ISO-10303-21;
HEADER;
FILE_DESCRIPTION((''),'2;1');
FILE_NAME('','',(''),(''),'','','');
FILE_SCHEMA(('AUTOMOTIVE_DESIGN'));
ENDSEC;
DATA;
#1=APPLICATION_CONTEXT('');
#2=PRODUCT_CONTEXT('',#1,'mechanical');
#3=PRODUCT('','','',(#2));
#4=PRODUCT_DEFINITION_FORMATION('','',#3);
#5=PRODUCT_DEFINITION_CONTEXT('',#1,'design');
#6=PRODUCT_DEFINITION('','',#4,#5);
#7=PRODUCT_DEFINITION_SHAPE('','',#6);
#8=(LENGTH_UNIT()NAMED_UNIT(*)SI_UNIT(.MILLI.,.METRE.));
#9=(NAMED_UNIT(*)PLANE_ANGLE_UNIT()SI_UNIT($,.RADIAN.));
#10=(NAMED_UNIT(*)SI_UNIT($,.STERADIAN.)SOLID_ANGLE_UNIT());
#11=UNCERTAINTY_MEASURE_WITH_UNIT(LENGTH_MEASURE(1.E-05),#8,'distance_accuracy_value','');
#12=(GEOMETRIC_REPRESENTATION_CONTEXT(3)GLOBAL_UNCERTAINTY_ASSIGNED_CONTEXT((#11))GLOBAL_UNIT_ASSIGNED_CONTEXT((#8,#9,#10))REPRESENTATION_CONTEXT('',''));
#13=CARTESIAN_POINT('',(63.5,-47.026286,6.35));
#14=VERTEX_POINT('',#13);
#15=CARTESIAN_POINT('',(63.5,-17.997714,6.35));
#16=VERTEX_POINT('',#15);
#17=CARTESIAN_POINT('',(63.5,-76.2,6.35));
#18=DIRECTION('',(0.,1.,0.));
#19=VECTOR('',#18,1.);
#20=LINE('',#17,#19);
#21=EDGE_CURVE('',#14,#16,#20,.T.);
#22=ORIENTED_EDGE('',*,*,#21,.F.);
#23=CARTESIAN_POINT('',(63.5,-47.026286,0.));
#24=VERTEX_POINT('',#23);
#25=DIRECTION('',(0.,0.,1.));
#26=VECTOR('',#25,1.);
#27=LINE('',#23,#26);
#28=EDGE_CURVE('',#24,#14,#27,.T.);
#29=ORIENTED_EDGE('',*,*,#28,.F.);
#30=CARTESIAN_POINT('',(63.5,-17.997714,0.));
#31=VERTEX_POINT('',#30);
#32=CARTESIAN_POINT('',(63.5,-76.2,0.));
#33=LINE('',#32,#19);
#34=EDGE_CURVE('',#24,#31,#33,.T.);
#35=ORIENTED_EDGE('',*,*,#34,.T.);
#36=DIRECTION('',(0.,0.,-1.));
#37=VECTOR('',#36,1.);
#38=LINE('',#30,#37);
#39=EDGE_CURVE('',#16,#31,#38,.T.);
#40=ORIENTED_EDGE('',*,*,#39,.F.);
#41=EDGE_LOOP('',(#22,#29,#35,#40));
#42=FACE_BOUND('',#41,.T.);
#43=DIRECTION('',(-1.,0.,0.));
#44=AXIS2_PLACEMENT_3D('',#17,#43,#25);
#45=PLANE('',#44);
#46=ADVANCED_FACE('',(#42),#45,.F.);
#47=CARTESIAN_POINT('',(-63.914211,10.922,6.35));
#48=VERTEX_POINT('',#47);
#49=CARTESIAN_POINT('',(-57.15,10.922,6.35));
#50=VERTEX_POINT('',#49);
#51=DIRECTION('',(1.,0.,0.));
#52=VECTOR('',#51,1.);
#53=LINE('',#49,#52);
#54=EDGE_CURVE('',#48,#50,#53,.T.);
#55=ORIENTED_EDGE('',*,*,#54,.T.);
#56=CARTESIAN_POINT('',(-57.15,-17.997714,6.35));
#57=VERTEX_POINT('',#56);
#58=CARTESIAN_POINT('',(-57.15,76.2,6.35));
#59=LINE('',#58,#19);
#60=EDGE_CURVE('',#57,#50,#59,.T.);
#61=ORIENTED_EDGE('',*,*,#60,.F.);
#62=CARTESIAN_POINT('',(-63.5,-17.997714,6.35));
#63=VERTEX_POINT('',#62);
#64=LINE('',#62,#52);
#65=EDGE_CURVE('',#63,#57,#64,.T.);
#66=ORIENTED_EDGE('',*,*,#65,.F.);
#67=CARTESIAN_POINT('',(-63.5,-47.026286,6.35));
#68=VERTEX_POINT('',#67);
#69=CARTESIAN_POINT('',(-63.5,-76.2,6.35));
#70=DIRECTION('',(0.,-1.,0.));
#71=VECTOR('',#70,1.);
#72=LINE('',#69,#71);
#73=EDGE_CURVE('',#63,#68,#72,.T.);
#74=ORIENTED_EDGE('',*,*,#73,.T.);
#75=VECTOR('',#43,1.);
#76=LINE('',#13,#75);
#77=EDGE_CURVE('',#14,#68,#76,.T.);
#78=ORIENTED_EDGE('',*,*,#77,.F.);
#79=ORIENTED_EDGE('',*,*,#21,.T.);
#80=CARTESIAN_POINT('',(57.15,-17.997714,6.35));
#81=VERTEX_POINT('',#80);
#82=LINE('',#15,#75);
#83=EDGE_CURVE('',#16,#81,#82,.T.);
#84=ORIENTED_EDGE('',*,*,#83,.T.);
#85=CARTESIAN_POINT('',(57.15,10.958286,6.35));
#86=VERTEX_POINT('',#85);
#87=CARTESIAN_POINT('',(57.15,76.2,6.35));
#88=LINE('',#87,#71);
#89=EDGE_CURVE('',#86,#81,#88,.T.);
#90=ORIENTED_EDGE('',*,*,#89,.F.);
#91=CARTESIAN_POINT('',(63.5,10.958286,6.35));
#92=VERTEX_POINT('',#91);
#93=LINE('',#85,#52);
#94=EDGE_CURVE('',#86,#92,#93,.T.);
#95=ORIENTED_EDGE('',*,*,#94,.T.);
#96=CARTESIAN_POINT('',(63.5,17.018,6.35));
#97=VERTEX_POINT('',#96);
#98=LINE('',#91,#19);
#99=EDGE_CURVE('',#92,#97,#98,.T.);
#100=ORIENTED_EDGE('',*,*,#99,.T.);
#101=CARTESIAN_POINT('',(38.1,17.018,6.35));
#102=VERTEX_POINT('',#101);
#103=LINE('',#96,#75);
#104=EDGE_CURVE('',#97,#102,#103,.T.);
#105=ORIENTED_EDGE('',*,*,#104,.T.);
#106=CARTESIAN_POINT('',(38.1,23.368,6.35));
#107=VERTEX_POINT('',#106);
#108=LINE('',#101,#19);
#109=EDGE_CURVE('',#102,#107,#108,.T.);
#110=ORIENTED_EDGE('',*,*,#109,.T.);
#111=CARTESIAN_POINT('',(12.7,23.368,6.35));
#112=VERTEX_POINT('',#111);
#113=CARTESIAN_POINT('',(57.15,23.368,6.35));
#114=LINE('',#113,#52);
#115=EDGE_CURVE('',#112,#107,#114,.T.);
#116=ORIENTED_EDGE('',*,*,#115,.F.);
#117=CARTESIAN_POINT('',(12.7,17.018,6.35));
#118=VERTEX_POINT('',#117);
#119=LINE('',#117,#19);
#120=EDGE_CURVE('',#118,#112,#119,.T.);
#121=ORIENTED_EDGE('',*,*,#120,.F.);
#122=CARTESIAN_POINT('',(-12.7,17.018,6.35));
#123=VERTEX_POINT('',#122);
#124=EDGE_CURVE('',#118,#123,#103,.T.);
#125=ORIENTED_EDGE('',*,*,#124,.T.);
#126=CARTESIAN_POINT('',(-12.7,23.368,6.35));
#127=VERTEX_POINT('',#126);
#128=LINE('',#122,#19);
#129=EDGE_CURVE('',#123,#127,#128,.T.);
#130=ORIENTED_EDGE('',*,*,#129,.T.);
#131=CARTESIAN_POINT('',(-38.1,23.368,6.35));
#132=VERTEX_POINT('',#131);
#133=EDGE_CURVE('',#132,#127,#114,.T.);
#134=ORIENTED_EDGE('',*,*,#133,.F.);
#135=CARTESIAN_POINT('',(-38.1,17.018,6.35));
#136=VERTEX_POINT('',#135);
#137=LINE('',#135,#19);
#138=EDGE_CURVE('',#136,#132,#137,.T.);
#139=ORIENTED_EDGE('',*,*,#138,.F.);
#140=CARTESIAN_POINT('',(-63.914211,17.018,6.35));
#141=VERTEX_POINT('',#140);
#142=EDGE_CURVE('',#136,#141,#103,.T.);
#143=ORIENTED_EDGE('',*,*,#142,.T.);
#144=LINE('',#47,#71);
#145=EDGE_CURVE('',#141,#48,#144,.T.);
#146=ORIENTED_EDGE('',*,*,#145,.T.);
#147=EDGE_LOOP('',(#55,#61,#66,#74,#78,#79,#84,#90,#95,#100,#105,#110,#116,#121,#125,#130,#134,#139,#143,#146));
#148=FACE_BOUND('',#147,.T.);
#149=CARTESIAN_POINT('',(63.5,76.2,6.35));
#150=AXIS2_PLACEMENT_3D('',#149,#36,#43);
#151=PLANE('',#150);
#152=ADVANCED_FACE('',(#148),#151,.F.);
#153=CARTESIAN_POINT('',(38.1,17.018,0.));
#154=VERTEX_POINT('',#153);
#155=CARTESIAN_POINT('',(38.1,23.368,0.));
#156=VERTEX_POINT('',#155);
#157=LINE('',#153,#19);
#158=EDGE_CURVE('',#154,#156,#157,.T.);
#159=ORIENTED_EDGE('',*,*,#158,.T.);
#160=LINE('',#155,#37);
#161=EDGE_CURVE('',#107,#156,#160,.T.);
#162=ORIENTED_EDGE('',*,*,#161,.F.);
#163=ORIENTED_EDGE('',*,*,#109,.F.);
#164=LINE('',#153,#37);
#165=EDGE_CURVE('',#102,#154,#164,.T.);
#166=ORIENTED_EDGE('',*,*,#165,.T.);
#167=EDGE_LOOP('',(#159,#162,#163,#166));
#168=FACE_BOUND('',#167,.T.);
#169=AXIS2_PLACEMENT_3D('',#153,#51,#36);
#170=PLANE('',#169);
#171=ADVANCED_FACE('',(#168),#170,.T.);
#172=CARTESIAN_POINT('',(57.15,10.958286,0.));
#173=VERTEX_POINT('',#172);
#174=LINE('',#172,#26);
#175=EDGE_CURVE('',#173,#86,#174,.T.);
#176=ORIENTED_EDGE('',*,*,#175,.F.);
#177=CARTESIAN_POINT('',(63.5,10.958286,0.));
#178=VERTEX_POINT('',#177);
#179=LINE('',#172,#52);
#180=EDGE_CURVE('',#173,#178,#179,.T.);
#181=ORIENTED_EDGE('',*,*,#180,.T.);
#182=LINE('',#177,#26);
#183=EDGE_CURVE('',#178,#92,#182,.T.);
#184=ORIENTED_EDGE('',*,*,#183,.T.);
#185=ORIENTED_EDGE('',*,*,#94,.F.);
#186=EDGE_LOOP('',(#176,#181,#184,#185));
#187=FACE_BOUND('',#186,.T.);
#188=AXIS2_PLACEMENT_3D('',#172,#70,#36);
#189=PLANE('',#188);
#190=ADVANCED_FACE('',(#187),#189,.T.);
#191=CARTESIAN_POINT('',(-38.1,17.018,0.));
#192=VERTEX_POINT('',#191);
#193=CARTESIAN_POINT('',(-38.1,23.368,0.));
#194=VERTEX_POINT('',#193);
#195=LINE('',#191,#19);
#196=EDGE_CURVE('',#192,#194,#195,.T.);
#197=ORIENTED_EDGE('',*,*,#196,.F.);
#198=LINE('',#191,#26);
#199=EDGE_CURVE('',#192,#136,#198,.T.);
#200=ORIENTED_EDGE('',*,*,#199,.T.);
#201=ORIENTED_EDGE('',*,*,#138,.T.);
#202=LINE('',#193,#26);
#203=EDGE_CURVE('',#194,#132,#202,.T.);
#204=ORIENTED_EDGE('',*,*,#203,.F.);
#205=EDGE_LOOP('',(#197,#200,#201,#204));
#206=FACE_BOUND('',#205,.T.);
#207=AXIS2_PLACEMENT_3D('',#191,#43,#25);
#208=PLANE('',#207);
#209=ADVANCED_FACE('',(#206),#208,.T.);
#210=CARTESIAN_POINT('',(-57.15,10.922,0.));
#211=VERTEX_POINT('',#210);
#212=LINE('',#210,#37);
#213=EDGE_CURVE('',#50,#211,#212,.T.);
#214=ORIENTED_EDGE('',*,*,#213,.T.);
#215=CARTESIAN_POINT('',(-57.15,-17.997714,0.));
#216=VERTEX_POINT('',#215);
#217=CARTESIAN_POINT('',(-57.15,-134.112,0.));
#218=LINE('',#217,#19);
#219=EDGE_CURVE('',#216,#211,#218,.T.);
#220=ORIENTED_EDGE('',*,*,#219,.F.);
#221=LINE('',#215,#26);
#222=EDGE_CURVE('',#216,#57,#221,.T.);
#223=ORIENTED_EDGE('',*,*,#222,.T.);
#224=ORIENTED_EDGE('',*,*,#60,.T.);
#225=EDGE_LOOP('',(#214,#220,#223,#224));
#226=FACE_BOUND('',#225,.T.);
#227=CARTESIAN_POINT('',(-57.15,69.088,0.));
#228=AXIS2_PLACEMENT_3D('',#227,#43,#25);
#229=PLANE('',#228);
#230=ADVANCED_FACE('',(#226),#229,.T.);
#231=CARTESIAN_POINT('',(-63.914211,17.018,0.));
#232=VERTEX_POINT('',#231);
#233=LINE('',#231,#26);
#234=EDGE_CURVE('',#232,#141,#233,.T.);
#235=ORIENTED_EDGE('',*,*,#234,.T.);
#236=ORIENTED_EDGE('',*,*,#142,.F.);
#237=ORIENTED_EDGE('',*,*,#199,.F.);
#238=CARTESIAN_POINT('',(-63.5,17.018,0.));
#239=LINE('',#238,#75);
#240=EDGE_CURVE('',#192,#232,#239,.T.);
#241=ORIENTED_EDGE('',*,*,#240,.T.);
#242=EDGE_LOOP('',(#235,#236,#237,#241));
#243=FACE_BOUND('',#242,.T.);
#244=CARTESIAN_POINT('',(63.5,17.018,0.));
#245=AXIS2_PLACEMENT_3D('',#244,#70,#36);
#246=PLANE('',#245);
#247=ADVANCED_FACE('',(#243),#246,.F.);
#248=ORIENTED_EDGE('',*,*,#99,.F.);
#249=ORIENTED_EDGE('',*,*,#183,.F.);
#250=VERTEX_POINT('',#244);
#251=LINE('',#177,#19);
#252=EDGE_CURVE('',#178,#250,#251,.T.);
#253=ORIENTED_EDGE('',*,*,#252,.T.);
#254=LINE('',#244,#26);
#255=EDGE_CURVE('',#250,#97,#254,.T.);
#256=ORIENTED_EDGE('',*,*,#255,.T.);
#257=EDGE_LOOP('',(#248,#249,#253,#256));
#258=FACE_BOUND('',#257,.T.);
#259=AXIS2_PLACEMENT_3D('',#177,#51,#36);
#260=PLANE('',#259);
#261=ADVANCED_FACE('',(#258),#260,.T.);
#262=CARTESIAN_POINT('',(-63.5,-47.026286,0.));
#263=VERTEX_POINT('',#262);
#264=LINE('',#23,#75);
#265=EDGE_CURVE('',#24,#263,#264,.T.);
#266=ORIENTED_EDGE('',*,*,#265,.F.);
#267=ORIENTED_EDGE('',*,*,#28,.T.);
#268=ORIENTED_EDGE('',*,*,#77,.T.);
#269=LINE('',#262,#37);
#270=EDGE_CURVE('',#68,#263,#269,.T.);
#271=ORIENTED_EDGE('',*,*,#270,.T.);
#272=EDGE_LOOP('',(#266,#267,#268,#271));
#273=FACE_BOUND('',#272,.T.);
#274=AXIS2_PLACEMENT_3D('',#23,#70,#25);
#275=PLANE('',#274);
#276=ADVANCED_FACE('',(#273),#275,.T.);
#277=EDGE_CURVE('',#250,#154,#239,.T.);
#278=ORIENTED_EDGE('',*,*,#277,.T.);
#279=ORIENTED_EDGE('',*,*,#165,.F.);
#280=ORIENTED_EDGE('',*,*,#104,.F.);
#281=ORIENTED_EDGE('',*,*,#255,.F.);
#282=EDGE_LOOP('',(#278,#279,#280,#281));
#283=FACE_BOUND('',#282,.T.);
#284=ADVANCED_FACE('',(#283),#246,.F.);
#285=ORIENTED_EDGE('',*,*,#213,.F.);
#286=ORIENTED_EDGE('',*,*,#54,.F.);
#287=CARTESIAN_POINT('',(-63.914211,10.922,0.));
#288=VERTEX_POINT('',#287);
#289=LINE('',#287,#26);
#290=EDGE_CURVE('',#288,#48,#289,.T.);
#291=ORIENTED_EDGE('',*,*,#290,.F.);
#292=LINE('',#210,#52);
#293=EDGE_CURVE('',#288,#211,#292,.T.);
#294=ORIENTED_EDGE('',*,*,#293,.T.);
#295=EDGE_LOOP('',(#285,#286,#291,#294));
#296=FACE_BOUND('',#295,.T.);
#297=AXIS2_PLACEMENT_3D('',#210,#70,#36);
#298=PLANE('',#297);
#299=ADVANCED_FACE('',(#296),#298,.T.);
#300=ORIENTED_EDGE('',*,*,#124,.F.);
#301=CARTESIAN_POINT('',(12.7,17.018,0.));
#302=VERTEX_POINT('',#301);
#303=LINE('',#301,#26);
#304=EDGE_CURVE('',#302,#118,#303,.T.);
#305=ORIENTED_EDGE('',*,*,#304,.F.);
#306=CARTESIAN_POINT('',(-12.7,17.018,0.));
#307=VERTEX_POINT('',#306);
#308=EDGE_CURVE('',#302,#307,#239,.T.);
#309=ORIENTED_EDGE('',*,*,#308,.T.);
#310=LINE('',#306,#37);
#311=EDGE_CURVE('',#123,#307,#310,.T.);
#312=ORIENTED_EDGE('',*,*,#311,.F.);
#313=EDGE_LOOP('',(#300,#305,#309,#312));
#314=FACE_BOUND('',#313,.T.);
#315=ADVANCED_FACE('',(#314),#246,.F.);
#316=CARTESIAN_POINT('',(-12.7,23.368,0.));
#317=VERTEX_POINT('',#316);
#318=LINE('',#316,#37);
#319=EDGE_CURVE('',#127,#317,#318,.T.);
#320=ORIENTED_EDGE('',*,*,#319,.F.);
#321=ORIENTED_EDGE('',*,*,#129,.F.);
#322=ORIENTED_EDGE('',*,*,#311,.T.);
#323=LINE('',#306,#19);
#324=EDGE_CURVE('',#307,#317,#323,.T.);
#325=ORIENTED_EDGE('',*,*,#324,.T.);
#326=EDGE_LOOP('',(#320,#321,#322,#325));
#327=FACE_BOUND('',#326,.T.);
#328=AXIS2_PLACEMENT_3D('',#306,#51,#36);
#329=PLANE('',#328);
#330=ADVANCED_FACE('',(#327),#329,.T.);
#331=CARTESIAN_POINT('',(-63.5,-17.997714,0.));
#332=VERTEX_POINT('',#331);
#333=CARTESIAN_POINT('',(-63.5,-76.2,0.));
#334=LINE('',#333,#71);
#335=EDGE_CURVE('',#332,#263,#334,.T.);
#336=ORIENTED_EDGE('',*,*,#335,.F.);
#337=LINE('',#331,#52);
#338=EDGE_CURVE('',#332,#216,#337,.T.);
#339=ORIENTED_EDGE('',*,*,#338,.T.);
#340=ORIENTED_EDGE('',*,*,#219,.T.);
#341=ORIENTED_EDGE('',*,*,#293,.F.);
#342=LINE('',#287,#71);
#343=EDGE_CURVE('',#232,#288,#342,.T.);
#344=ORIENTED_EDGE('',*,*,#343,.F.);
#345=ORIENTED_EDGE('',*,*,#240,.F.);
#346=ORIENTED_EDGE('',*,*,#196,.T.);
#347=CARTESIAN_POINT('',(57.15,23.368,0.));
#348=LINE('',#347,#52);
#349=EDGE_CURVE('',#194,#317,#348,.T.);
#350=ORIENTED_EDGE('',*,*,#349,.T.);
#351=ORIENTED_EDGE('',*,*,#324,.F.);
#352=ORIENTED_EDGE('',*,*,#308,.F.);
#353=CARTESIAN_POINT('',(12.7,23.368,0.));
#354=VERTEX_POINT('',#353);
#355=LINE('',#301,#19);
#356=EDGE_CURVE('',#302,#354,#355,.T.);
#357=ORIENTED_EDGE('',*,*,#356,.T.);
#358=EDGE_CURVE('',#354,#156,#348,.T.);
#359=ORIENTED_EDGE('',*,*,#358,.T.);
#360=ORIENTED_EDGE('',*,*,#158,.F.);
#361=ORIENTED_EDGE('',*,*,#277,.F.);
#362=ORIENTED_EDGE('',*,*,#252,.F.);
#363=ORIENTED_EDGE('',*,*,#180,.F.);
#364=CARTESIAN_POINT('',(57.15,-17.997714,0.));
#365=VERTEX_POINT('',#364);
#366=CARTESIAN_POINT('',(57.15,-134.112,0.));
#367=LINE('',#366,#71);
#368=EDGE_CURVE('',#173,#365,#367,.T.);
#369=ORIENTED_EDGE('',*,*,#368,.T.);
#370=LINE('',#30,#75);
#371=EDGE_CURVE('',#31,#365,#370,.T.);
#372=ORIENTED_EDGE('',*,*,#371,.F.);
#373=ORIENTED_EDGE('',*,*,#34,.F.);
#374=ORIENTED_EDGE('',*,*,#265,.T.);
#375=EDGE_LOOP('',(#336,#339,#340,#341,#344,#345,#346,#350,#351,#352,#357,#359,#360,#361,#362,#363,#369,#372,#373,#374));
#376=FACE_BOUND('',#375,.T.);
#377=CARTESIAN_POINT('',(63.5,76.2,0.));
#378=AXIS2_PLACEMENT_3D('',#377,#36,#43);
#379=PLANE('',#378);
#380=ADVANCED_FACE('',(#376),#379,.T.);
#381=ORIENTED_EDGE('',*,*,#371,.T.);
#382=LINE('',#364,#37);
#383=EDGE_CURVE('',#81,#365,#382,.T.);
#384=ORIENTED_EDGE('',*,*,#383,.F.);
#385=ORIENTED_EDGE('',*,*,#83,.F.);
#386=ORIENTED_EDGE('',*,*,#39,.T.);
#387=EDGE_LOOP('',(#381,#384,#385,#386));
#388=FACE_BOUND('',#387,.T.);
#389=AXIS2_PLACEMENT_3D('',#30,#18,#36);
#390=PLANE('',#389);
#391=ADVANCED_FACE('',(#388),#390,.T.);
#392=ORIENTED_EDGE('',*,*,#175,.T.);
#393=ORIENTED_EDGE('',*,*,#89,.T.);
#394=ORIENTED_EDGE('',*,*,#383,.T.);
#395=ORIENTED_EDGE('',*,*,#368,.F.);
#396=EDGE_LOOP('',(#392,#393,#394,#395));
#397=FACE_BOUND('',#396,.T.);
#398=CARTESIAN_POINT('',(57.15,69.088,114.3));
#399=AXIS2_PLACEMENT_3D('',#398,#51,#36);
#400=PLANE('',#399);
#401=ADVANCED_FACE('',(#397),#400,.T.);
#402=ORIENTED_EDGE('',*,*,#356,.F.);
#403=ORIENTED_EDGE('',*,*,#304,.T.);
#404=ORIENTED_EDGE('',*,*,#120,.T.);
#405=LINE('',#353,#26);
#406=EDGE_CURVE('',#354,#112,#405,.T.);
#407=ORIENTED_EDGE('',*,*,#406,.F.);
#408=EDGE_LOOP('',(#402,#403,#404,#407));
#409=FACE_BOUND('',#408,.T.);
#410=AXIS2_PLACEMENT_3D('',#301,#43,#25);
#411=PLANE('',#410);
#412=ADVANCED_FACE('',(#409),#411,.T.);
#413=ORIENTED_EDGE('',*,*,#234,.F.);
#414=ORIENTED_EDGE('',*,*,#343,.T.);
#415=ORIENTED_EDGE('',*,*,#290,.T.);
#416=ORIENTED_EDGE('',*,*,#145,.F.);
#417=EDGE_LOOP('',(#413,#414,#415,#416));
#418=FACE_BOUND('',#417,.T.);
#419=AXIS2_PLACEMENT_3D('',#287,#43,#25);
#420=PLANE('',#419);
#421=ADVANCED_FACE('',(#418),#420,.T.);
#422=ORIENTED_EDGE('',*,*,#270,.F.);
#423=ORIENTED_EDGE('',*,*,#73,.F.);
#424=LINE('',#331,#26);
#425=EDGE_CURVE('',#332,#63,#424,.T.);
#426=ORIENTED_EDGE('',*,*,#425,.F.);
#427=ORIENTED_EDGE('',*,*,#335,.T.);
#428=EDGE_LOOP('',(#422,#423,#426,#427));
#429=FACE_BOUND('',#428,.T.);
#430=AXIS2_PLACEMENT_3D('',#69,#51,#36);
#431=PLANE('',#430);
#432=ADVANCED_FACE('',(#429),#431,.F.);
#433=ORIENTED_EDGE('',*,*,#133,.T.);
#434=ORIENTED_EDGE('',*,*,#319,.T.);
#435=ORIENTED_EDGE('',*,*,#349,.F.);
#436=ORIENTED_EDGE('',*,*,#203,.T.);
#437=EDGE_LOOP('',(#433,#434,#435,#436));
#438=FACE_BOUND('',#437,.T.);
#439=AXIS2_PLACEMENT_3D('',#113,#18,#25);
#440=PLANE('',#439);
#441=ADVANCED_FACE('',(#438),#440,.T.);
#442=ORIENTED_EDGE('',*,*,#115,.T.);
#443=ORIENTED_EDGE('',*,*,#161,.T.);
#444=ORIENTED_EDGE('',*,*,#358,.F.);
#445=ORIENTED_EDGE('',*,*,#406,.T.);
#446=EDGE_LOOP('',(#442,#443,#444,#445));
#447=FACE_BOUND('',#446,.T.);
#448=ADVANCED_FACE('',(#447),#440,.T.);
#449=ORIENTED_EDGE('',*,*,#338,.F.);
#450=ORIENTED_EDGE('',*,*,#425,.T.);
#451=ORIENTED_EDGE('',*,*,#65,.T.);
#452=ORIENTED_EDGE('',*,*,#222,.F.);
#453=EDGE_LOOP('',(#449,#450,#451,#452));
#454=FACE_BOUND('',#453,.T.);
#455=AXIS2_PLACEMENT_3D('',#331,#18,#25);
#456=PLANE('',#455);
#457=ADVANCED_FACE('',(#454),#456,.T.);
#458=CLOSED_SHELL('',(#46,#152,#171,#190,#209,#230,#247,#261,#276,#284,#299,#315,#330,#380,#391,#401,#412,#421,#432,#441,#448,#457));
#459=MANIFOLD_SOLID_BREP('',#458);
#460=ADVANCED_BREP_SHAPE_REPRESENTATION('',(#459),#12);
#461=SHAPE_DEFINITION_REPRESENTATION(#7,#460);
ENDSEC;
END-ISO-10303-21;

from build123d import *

# Parameters (mm, degrees)
SKETCH2_W             = 127
SKETCH2_H             = 152.4
BOSS_EXTRUDE2_DEPTH   = 6.35
SKETCH3_W             = 127
SKETCH3_H             = 65.278
CUT_EXTRUDE1_DEPTH    = 100.3932216
CAVITY1_START         = -63.5
CAVITY1_OUTLINE_W     = 28.919714286
CAVITY1_OUTLINE_H     = 6.35
CAVITY1_OUTLINE_W_2   = 29.028571429
CAVITY1_DEPTH         = 6.35
CAVITY1_START_2       = 57.15
CAVITY1_2_OUTLINE_W   = 28.919714286
CAVITY1_2_OUTLINE_H   = 6.35
CAVITY1_2_OUTLINE_W_2 = 29.028571429
CAVITY1_2_DEPTH       = 6.35
CUT_EXTRUDE2_DEPTH    = 100.3932216
BOSS_EXTRUDE3_DEPTH   = 6.35
CAVITY2_START         = 17.018
CAVITY2_OUTLINE_W     = 20.9
CAVITY2_OUTLINE_H     = 9
CAVITY2_OUTLINE_W_2   = 25.4
CAVITY2_OUTLINE_W_3   = 19.05
CAVITY2_DEPTH         = 6.35
SKETCH6_W             = 6.35
SKETCH6_H             = 6.059714286
BOSS_EXTRUDE4_DEPTH   = 6.35
SKETCH7_W             = 114.3
SKETCH7_H             = 29.173714286
CUT_EXTRUDE3_DEPTH    = 100.658360693


# Read off the part's stored shape, not the designer's step: Cavity1, Cavity2
with BuildPart() as part:
    # Sketch2 → Boss-Extrude2 (new body)
    with BuildSketch(Plane.XY):
        Rectangle(SKETCH2_W, SKETCH2_H)
    extrude(amount=BOSS_EXTRUDE2_DEPTH)

    # Sketch3 → Cut-Extrude1 (cut, through all)
    with BuildSketch(Plane.XY.offset(6.35)):
        with Locations((0, 43.561)):
            Rectangle(SKETCH3_W, SKETCH3_H)
    extrude(amount=-CUT_EXTRUDE1_DEPTH, mode=Mode.SUBTRACT)

    # Cavity1 outline → Cavity1 (cut)
    with BuildSketch(Plane.YZ.offset(CAVITY1_START)):
        with Locations((-3.537857143, 3.175)):
            Rectangle(CAVITY1_OUTLINE_W, CAVITY1_OUTLINE_H)
        with Locations((-61.540571429, 3.175)):
            Rectangle(CAVITY1_OUTLINE_W_2, CAVITY1_OUTLINE_H)
    extrude(amount=CAVITY1_DEPTH, mode=Mode.SUBTRACT)

    # Cavity1 2 outline → Cavity1 2 (cut)
    with BuildSketch(Plane.YZ.offset(CAVITY1_START_2)):
        with Locations((-3.537857143, 3.175)):
            Rectangle(CAVITY1_2_OUTLINE_W, CAVITY1_2_OUTLINE_H)
        with Locations((-61.540571429, 3.175)):
            Rectangle(CAVITY1_2_OUTLINE_W_2, CAVITY1_2_OUTLINE_H)
    extrude(amount=CAVITY1_2_DEPTH, mode=Mode.SUBTRACT)

    # Sketch4 → Cut-Extrude2 (cut, through all)
    with BuildSketch(Plane(origin=(0, 0, 0), x_dir=(-1, 0, 0), z_dir=(0, 0, -1))):
        Polygon((-57.15, -76.054857143), (-57.15, -79.645008966), (-65.377811093, -79.645008966), (-65.377811093, -73.782579567), (-57.15, -73.782579567), align=None)
        Polygon((57.15, -76.054857143), (57.15, -79.645008966), (65.72742819, -79.645008966), (65.72742819, -72.849920344), (57.15, -72.849920344), align=None)
    extrude(amount=-CUT_EXTRUDE2_DEPTH, mode=Mode.SUBTRACT)

    # Sketch5 → Boss-Extrude3 (add, through all)
    with BuildSketch(Plane(origin=(0, 0, 0), x_dir=(-1, 0, 0), z_dir=(0, 0, -1))):
        Polygon((-57.15, 10.922), (-57.15, 23.368), (57.995680603, 23.368), (57.15, 10.922), align=None)
    extrude(amount=-BOSS_EXTRUDE3_DEPTH)

    # Cavity2 outline → Cavity2 (cut)
    with BuildSketch(Plane(origin=(0, 0, 0), x_dir=(1, 0, 0), z_dir=(0, 1, 0)).offset(CAVITY2_START)):
        with Locations((-48.55, -3.5)):
            Rectangle(CAVITY2_OUTLINE_W, CAVITY2_OUTLINE_H)
        with Locations((0, -3.5)):
            Rectangle(CAVITY2_OUTLINE_W_2, CAVITY2_OUTLINE_H)
        with Locations((47.625, -3.5)):
            Rectangle(CAVITY2_OUTLINE_W_3, CAVITY2_OUTLINE_H)
    extrude(amount=CAVITY2_DEPTH, mode=Mode.SUBTRACT)

    # Sketch6 → Boss-Extrude4 (add, through all)
    with BuildSketch(Plane.XY.offset(6.35)):
        with Locations((60.325, 13.988142857)):
            Rectangle(SKETCH6_W, SKETCH6_H)
        Polygon((-63.914210908, 17.018), (-57.564210908, 17.018), (-57.15, 10.922), (-63.914210908, 10.922), align=None)
    extrude(amount=-BOSS_EXTRUDE4_DEPTH)

    # Sketch7 → Cut-Extrude3 (cut, through all)
    with BuildSketch(Plane(origin=(0, 0, 0), x_dir=(-1, 0, 0), z_dir=(0, 0, -1))):
        with Locations((0, -61.613142857)):
            Rectangle(SKETCH7_W, SKETCH7_H)
    extrude(amount=-CUT_EXTRUDE3_DEPTH, mode=Mode.SUBTRACT)


solid = part.part
